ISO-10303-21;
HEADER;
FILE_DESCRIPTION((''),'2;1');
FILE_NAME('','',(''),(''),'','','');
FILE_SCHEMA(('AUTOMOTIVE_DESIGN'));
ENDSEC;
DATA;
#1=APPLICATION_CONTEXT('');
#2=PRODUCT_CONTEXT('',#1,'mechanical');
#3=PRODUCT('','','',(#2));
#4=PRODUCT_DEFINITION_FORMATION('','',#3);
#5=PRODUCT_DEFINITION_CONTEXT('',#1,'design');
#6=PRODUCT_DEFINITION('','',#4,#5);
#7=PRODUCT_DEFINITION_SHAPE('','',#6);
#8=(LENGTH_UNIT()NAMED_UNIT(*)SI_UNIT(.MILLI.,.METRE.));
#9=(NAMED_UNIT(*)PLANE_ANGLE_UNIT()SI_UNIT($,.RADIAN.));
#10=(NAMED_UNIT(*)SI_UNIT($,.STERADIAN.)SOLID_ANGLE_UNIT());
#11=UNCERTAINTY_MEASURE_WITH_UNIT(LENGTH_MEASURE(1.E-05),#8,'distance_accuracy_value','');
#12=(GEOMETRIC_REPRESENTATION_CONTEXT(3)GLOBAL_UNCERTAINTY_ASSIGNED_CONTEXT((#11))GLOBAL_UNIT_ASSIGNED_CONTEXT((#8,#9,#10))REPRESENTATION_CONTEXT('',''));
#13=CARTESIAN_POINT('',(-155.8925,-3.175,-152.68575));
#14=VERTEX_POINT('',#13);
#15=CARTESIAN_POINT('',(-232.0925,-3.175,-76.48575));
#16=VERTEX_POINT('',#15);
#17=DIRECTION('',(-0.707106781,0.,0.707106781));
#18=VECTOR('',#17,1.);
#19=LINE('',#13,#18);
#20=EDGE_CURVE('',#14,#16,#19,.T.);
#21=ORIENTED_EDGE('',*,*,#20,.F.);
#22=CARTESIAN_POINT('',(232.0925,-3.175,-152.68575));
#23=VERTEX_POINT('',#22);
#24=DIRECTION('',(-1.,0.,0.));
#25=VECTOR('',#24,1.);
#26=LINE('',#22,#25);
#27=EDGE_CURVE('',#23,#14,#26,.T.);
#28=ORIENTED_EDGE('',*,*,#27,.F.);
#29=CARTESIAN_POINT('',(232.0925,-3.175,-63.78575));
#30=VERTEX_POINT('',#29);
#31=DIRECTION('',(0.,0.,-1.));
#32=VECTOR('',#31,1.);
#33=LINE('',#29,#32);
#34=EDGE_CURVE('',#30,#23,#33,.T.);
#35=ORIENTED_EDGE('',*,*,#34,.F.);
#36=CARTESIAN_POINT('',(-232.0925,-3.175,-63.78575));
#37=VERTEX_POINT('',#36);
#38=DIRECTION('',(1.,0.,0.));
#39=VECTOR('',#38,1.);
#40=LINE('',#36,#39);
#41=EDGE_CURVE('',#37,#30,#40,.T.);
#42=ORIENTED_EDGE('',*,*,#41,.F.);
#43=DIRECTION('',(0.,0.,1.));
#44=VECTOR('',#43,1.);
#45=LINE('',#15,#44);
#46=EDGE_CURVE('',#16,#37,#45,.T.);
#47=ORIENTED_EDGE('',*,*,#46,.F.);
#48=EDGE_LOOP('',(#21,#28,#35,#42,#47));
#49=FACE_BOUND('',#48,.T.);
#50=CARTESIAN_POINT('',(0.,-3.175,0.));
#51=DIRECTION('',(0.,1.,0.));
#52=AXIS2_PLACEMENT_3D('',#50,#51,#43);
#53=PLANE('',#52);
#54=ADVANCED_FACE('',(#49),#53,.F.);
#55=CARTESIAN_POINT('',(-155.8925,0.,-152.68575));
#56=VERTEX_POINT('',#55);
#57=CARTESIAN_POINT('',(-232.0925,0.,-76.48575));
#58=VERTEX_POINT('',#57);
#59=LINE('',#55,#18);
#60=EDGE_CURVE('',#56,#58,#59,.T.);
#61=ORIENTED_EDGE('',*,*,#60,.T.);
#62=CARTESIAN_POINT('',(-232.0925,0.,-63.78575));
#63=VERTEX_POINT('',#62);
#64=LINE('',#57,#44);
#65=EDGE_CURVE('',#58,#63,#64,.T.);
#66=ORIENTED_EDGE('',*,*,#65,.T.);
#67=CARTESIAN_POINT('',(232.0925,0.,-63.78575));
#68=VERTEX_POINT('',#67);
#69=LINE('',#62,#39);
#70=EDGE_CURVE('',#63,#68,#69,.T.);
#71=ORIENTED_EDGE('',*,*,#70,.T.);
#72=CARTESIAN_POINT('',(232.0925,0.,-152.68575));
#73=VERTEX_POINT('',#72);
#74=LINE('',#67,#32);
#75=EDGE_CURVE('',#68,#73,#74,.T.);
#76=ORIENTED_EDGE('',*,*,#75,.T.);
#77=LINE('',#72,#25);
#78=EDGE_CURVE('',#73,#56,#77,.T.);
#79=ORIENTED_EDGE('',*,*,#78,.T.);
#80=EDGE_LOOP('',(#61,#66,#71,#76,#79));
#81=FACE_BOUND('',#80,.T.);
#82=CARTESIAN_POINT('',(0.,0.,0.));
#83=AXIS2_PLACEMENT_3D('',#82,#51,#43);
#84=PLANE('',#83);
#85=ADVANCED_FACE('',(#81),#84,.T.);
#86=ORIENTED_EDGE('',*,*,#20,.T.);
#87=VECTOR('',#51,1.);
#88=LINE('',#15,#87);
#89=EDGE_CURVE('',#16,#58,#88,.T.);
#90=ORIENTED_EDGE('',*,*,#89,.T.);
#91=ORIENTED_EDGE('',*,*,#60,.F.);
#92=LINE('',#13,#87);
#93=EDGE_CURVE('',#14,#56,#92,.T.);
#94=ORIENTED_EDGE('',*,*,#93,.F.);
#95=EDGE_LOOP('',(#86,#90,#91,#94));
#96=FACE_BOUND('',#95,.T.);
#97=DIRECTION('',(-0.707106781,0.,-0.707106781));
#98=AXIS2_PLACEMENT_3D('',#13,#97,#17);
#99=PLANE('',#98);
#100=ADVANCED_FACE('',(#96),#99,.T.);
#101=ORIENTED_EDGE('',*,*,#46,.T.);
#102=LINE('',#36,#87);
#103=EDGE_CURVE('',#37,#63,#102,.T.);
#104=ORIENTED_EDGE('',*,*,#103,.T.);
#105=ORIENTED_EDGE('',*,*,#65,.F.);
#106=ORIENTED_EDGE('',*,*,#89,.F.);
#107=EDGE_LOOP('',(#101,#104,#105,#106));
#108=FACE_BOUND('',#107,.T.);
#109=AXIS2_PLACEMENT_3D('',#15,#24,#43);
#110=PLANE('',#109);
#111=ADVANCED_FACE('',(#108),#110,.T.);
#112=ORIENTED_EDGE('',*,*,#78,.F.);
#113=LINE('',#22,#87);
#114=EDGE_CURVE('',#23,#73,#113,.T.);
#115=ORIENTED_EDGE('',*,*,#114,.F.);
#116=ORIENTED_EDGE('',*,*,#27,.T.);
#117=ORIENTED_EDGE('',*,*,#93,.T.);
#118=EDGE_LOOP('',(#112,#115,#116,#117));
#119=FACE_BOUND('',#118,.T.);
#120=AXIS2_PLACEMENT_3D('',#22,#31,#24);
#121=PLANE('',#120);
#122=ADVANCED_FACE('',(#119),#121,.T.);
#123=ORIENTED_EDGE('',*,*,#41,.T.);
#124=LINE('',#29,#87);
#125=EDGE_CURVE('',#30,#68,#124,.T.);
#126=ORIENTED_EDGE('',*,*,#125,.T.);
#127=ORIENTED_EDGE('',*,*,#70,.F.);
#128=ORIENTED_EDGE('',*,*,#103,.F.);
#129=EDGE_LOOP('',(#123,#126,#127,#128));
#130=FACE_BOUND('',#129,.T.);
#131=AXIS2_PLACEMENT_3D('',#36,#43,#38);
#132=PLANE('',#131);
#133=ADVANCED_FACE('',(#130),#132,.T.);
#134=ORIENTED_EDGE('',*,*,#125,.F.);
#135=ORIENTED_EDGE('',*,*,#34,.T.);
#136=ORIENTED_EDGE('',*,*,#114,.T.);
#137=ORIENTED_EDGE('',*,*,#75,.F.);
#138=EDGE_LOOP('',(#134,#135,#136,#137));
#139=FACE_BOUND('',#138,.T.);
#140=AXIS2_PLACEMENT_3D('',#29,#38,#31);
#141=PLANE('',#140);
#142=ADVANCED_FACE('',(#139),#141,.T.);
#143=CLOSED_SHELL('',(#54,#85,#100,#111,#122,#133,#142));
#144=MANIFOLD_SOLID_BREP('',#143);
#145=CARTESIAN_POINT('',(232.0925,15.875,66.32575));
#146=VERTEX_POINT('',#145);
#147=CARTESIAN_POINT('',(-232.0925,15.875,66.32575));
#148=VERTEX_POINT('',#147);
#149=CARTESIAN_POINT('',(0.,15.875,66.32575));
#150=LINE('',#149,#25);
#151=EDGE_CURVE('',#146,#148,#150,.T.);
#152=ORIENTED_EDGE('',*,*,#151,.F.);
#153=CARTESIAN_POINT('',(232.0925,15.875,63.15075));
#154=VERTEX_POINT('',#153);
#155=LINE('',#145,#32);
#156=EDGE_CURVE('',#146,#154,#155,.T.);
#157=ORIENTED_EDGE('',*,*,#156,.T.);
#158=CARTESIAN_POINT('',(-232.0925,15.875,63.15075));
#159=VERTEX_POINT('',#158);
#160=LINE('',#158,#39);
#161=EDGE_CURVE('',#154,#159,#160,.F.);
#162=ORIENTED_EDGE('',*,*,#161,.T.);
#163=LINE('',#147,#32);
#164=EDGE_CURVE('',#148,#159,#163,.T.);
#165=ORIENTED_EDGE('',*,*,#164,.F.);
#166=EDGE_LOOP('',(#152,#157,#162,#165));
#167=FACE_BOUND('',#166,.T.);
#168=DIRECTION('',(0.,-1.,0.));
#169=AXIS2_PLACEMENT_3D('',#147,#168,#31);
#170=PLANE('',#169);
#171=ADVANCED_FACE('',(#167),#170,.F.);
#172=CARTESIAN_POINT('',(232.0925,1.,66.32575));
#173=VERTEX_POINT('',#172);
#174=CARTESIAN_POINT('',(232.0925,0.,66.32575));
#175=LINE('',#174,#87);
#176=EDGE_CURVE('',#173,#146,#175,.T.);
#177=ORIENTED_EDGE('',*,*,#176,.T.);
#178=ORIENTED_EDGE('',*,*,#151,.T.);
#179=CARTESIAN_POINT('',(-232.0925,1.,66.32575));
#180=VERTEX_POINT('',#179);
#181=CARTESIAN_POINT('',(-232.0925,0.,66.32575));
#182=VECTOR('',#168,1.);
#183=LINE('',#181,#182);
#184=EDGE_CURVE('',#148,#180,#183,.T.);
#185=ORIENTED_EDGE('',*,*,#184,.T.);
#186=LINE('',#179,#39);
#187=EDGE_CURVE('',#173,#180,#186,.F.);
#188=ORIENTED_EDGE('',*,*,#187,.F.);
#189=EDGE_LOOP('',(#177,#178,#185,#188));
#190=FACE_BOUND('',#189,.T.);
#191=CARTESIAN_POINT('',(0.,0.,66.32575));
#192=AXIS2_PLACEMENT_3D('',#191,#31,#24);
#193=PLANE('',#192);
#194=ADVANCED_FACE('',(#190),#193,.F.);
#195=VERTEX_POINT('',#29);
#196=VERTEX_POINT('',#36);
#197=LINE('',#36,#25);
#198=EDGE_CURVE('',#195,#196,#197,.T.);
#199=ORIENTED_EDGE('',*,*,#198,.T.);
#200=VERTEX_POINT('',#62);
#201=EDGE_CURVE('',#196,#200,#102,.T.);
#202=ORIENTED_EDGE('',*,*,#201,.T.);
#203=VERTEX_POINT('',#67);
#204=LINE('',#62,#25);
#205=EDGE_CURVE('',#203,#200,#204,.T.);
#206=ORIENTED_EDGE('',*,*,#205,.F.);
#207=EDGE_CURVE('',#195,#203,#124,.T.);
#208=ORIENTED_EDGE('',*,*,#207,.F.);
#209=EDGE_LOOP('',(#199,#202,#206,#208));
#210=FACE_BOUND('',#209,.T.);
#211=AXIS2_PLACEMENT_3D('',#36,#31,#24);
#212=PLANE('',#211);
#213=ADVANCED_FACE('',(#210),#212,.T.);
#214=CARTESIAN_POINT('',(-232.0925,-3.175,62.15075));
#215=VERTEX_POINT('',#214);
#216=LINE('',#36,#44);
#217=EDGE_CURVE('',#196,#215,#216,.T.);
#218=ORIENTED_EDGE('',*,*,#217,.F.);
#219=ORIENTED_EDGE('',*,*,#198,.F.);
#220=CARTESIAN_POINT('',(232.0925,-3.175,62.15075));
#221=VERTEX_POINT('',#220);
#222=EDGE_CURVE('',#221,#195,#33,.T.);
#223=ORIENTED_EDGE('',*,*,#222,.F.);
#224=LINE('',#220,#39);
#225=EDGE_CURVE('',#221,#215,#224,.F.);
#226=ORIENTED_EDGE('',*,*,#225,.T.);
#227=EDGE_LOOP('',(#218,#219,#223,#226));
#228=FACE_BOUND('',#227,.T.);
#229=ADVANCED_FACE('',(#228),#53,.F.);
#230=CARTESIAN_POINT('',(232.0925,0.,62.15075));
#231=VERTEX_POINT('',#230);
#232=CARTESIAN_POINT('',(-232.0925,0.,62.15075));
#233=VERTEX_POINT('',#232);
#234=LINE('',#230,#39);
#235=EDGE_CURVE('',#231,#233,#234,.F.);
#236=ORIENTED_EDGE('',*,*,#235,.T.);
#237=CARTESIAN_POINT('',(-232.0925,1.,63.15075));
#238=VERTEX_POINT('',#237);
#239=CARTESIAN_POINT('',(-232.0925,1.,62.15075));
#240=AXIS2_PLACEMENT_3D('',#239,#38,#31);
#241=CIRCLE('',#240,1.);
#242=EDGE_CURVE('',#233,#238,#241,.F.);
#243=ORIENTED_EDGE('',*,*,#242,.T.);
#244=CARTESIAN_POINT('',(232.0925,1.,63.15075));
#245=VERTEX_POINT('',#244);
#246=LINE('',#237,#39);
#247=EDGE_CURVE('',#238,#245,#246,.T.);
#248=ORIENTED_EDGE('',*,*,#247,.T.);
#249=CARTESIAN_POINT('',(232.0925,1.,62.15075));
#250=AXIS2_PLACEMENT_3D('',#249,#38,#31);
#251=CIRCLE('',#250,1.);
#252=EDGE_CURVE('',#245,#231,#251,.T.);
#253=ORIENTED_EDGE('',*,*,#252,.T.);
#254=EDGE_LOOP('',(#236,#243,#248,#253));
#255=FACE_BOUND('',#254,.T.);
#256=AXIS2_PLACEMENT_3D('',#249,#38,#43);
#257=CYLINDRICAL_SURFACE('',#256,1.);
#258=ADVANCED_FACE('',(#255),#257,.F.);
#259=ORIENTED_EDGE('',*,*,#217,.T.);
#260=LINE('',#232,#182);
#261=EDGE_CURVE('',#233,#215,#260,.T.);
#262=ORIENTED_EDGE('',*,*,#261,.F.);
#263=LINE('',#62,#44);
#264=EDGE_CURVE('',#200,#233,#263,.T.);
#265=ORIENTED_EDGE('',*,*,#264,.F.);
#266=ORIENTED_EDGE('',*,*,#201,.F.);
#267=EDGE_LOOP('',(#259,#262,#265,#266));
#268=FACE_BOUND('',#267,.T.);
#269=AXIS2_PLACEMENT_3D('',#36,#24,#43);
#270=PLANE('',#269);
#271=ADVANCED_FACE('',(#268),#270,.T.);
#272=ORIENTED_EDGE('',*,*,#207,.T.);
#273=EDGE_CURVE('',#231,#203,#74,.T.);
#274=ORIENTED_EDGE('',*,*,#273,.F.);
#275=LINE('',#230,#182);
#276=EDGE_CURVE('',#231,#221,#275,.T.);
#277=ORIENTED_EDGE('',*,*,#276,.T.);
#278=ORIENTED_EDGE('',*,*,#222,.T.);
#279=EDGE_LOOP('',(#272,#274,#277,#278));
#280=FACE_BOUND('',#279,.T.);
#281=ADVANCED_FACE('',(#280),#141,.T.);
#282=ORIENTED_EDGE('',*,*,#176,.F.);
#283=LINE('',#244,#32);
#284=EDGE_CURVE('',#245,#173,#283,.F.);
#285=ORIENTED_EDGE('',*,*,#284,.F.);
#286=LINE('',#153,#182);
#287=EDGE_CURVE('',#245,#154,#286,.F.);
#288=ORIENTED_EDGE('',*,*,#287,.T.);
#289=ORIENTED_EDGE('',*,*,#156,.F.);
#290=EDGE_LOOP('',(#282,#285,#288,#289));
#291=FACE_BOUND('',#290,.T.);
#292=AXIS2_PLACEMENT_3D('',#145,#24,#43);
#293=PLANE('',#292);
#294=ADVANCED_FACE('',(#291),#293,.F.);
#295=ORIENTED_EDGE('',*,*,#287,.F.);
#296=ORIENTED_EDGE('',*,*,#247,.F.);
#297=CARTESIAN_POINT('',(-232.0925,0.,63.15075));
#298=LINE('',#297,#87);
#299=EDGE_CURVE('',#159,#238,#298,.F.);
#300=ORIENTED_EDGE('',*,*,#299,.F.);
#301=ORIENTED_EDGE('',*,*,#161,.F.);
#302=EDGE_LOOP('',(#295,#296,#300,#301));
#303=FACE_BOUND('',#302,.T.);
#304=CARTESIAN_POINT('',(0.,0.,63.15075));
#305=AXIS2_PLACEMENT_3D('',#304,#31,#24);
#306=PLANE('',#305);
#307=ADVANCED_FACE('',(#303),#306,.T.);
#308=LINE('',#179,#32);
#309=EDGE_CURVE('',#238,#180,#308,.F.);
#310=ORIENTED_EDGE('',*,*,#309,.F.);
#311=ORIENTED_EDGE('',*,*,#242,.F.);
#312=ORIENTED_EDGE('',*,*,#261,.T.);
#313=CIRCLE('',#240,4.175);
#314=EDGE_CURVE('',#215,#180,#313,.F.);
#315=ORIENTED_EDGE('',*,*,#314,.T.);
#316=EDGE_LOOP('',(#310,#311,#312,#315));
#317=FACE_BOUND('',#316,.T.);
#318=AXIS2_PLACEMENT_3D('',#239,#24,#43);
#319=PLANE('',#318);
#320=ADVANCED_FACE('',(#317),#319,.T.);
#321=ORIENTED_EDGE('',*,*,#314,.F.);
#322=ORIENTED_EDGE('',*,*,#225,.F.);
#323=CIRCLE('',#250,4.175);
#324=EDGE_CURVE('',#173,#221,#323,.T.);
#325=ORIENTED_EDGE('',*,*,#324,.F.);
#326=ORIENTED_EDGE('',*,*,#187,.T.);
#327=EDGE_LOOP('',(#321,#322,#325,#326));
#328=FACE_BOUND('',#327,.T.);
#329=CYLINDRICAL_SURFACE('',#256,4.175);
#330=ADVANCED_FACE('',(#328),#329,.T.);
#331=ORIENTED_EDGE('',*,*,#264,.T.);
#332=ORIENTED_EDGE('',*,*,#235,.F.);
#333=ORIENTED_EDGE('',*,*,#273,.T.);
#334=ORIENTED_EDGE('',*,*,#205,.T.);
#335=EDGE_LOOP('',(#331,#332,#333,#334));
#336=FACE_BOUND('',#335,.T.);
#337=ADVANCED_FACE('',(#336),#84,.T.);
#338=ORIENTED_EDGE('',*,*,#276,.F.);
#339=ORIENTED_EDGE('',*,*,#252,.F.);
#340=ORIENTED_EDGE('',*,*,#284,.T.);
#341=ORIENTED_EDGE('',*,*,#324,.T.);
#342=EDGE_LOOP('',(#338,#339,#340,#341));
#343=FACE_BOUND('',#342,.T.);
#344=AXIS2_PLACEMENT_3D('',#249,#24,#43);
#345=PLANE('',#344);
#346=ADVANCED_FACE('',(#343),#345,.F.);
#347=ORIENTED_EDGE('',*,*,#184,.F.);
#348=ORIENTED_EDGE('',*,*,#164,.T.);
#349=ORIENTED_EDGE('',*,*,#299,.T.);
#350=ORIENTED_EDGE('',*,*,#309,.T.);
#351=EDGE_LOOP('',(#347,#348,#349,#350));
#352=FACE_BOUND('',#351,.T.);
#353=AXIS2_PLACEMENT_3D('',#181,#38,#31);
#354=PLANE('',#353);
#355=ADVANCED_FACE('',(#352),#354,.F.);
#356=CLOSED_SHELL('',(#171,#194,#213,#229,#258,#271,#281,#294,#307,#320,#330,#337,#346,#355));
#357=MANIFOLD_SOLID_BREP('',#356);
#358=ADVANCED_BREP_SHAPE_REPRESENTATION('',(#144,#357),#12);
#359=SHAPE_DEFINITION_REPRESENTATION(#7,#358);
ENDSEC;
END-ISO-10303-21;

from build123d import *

# Parameters (mm, degrees)
POWER_ELECTRONICS_WALL_DEPTH = 3.175
SKETCH5_W                    = 464.185
SKETCH5_H                    = 127.5715
BASE_FLANGE1_DEPTH           = 3.175
EDGE_FLANGE1_STRIP_W         = 17.24
EDGE_FLANGE1_STRIP_H         = 3.175
EDGE_FLANGE1_STRIP_CUT_DEPTH = 464.185
EDGE_FLANGE1_DEPTH           = 464.185


# Sheet-metal steps are written as plain solids
with BuildPart() as part:
    # Sketch2 → Power Electronics Wall (new body)
    with BuildSketch(Plane(origin=(0, 0, 0), x_dir=(1, 0, 0), z_dir=(0, 1, 0))):
        Polygon((-232.0925, 63.78575), (232.0925, 63.78575), (232.0925, 152.68575), (-155.8925, 152.68575), (-232.0925, 76.48575), align=None)
    extrude(amount=-POWER_ELECTRONICS_WALL_DEPTH)


with BuildPart() as body_2:
    # Sketch5 → Base-Flange1 (new body)
    with BuildSketch(Plane(origin=(0, 0, 0), x_dir=(1, 0, 0), z_dir=(0, 1, 0))):
        Rectangle(SKETCH5_W, SKETCH5_H)
    extrude(amount=-BASE_FLANGE1_DEPTH)

    # Edge-Flange1 strip (across the edge) → Edge-Flange1 strip cut (cut)
    with BuildSketch(Plane(origin=(-232.0925, 0, 66.32575), x_dir=(0, 0, -1), z_dir=(1, 0, 0))):
        with Locations((-4.445, -1.5875)):
            Rectangle(EDGE_FLANGE1_STRIP_W, EDGE_FLANGE1_STRIP_H)
    extrude(amount=EDGE_FLANGE1_STRIP_CUT_DEPTH, mode=Mode.SUBTRACT)

    # Edge-Flange1 section (across the edge) → Edge-Flange1 (add)
    with BuildSketch(Plane(origin=(-232.0925, 0, 66.32575), x_dir=(0, 0, -1), z_dir=(1, 0, 0))):
        with BuildLine():
            Line((0, 1), (0, 15.875))
            Line((0, 15.875), (3.175, 15.875))
            Line((3.175, 15.875), (3.175, 1))
            ThreePointArc((3.175, 1), (3.467893219, 0.292893219), (4.175, 0))
            Line((4.175, 0), (4.175, -3.175))
            ThreePointArc((4.175, -3.175), (1.222829189, -1.952170811), (0, 1))
        make_face()
    extrude(amount=EDGE_FLANGE1_DEPTH)


solid = Compound([part.part, body_2.part])
